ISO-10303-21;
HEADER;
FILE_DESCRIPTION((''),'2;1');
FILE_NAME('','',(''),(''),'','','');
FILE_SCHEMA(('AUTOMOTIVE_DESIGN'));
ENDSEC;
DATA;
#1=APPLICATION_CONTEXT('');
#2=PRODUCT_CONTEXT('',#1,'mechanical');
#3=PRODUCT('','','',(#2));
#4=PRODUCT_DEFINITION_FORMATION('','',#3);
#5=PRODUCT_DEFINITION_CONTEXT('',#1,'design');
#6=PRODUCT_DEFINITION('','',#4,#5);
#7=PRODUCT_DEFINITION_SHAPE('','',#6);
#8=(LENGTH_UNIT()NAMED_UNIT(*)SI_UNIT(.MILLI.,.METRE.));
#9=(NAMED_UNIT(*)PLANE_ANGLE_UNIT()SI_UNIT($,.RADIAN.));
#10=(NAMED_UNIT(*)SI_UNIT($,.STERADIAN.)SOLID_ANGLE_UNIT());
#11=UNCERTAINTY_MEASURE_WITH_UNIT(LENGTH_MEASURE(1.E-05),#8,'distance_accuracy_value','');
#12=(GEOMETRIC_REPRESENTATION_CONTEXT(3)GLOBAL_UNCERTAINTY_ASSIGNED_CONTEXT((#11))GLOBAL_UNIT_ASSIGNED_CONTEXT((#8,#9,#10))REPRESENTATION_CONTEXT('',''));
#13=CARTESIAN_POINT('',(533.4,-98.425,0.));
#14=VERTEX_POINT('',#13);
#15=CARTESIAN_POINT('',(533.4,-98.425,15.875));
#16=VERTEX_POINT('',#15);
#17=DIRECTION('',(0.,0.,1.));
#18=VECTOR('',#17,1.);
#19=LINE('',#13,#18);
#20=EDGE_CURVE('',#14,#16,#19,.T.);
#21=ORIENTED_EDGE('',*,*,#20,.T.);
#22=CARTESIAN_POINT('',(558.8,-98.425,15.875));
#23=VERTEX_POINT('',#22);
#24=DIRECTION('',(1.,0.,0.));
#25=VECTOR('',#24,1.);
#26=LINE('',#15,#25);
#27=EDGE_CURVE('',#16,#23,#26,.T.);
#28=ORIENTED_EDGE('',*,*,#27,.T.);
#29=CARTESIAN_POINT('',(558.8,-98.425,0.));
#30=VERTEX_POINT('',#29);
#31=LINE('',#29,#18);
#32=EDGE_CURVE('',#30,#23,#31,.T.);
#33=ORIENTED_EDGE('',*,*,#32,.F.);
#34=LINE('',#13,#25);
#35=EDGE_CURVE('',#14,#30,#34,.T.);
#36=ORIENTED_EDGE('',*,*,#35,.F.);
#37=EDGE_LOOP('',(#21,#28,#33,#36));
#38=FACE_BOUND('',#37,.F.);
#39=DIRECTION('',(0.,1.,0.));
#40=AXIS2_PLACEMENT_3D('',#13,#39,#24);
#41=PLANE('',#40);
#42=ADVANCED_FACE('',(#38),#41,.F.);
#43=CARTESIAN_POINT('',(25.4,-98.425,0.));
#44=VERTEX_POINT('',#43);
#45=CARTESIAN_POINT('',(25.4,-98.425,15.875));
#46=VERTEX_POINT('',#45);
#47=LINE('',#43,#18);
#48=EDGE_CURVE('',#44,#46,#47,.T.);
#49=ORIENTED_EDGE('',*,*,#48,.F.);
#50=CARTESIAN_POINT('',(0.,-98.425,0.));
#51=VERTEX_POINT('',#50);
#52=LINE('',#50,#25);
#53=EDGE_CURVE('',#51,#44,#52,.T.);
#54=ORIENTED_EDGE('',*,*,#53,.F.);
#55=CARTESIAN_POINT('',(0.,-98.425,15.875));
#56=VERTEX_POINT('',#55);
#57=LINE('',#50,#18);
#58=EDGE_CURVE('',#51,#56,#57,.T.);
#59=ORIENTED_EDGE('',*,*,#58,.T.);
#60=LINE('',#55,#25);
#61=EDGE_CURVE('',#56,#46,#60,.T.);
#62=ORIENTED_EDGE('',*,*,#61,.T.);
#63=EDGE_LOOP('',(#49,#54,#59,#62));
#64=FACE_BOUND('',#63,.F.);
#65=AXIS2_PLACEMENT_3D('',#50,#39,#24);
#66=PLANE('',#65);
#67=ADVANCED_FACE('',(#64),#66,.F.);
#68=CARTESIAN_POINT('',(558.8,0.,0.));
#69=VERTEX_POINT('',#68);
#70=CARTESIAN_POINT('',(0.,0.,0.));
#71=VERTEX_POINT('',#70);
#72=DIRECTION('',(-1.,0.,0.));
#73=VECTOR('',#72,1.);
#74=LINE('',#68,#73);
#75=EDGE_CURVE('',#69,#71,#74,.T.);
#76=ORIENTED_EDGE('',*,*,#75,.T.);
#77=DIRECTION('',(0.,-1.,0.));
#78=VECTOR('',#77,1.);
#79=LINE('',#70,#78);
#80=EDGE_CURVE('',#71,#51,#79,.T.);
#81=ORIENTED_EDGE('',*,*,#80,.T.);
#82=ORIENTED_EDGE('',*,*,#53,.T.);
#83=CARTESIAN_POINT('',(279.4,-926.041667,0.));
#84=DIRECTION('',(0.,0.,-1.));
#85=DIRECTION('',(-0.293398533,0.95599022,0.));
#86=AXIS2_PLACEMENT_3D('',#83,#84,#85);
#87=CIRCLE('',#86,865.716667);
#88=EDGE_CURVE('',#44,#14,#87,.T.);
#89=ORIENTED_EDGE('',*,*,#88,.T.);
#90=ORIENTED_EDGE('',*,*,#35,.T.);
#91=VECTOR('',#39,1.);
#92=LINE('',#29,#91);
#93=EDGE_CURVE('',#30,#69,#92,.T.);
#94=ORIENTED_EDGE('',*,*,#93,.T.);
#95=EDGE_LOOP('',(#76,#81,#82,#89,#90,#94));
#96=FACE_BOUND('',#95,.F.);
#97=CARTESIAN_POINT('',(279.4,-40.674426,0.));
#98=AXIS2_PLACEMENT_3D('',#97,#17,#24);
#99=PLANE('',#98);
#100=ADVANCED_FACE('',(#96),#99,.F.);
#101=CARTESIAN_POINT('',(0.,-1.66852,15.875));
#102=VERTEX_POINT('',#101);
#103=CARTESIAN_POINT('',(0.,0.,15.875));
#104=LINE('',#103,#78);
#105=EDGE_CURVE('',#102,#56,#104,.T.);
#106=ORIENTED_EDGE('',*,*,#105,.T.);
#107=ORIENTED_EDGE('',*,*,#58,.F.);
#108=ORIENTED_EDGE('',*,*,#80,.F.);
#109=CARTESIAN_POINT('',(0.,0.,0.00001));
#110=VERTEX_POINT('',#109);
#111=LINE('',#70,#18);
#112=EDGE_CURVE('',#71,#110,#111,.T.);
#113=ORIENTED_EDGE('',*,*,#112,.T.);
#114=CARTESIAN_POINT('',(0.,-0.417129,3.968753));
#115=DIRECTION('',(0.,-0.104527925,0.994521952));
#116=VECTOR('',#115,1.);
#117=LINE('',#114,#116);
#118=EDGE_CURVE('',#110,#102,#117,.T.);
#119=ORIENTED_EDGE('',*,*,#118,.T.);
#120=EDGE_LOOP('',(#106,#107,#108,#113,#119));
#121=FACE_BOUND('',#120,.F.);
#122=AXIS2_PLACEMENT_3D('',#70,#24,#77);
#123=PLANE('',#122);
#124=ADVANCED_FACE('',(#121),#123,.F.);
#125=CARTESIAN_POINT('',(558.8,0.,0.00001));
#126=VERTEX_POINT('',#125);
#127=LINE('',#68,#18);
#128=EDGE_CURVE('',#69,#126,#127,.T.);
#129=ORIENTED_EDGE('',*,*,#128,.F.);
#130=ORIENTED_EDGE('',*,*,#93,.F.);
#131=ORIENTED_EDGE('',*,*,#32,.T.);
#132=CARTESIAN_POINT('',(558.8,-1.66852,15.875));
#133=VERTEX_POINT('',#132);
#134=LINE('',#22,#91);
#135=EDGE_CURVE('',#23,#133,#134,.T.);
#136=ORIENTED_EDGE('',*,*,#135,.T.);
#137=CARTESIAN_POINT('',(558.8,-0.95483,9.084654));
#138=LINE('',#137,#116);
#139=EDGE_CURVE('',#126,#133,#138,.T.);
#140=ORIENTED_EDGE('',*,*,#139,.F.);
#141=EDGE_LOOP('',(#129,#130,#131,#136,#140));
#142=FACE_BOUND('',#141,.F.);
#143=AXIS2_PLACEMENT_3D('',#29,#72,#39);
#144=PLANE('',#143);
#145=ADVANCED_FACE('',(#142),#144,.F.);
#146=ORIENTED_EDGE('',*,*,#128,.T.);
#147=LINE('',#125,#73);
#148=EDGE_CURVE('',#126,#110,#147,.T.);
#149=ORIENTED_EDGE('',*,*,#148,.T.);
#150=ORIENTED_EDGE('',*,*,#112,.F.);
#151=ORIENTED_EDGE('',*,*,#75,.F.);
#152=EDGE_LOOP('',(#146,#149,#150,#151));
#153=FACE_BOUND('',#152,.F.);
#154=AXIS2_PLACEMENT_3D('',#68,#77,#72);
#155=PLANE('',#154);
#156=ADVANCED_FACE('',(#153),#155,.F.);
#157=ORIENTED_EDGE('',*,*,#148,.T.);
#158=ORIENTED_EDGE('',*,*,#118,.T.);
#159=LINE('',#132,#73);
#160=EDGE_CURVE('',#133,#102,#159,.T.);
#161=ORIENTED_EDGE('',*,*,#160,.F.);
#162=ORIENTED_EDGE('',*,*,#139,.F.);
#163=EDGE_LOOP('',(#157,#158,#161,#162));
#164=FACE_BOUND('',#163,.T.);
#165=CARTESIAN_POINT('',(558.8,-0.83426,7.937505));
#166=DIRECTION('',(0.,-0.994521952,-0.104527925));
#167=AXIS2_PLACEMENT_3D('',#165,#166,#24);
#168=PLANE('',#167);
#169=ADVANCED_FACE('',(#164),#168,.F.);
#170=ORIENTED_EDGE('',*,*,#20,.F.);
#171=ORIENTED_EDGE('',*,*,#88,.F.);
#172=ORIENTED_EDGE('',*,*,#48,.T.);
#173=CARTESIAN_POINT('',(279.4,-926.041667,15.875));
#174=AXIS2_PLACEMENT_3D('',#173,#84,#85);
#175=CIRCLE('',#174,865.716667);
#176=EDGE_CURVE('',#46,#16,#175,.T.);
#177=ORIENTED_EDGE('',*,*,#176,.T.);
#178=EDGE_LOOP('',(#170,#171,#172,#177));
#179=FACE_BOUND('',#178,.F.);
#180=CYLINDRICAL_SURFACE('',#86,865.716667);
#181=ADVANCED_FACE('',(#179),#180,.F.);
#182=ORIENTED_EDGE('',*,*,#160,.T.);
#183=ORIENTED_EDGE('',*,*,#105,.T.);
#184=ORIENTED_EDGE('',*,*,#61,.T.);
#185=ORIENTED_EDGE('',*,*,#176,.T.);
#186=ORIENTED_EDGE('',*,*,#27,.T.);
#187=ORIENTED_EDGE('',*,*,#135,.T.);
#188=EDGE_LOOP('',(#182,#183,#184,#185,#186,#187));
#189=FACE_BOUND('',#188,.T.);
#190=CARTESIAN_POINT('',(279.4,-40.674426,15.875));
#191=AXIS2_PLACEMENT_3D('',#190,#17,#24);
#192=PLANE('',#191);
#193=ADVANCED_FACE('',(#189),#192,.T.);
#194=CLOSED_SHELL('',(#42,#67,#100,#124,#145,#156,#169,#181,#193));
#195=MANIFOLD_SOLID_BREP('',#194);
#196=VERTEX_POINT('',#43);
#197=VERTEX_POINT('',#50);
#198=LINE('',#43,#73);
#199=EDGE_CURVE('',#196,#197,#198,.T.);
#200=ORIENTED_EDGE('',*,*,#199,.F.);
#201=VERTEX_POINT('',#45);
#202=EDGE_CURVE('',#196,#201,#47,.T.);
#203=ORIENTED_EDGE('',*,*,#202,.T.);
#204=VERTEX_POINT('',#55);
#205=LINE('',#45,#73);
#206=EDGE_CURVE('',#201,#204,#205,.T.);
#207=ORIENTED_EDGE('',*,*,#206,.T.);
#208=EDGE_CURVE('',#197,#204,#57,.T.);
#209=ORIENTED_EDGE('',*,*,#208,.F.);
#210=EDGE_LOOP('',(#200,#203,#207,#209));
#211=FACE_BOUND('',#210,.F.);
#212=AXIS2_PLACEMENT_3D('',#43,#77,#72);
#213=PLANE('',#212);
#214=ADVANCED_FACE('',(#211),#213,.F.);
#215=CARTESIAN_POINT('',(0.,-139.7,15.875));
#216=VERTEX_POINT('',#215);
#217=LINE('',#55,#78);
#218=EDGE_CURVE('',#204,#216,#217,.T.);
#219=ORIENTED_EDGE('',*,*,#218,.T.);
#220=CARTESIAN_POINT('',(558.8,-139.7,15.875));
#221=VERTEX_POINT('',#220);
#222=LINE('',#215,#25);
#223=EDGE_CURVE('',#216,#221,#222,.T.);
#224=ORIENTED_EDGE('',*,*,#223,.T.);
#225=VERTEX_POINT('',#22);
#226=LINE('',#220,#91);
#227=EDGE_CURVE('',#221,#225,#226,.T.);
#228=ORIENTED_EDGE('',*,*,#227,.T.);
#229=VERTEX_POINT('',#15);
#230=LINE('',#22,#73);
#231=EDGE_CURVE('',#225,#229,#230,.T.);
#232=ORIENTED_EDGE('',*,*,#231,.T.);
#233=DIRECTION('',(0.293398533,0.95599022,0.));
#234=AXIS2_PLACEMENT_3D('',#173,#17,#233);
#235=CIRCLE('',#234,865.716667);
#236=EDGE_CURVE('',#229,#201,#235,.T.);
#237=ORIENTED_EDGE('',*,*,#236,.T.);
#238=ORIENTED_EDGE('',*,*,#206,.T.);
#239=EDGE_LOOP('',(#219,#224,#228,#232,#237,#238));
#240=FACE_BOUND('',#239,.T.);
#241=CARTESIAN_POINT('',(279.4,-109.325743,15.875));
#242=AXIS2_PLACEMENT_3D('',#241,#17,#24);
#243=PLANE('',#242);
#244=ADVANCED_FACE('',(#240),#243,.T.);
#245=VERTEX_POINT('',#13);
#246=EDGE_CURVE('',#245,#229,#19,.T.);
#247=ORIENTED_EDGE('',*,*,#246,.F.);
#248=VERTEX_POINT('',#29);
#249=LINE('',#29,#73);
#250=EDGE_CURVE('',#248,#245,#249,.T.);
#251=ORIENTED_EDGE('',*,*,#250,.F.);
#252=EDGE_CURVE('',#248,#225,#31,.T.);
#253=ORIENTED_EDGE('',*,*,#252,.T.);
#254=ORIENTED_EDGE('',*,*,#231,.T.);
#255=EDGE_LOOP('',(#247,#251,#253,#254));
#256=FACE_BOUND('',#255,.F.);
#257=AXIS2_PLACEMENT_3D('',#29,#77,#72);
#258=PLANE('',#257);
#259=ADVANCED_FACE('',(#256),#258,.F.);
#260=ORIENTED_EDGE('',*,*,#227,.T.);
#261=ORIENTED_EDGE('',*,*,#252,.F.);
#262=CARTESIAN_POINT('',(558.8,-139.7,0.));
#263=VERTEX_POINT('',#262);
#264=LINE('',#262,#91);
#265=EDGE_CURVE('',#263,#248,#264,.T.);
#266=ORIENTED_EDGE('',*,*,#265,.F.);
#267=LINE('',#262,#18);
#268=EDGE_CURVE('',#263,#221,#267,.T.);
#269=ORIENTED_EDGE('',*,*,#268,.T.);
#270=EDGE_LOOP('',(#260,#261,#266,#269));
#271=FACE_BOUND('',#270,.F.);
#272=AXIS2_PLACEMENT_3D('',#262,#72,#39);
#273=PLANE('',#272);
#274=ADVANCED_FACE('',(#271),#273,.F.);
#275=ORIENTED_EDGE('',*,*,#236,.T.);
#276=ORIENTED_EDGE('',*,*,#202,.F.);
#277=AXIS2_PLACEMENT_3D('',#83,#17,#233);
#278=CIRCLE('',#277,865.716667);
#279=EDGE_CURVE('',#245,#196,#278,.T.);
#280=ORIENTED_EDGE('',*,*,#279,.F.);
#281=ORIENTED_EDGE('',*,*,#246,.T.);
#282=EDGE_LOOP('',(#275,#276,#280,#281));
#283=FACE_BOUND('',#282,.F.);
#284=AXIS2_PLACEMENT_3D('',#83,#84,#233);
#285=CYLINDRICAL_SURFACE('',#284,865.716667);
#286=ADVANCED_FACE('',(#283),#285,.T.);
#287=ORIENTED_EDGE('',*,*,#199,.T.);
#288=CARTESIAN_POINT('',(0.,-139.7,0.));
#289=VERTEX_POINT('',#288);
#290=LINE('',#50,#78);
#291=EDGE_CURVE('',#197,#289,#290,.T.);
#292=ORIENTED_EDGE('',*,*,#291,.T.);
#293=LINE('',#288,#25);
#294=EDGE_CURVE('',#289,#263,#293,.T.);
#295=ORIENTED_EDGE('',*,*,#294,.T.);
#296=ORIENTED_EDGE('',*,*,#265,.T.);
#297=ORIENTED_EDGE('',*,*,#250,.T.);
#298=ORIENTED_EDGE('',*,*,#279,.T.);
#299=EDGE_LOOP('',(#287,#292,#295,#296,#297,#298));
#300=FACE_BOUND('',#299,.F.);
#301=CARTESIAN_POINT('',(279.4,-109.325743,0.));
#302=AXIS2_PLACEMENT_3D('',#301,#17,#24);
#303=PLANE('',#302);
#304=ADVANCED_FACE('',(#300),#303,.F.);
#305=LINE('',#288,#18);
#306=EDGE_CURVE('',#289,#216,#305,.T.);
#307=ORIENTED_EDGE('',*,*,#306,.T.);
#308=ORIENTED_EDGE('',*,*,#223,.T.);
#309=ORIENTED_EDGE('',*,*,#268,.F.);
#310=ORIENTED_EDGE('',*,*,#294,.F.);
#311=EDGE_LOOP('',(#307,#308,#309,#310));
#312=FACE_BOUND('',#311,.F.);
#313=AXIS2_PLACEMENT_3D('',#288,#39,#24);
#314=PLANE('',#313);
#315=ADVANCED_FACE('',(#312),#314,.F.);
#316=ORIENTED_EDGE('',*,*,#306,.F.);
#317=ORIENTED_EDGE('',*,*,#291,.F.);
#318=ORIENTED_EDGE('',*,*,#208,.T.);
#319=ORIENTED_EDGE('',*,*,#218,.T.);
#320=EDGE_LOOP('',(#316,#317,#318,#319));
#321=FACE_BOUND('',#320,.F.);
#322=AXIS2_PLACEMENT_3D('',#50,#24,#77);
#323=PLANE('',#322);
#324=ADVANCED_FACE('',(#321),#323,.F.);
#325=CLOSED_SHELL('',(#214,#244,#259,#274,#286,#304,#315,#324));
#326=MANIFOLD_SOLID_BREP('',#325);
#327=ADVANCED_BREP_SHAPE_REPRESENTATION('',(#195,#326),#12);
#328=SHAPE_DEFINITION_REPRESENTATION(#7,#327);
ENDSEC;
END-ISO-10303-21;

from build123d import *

# Parameters (mm, degrees)
F1_DEPTH = 15.875
F2_DEPTH = 15.875
F3_SIZE2 = 1.66852
F3_SIZE  = 15.87499


# Not quite as in the source:
# - a fillet or chamfer is up to 0.001 mm smaller than in the source, because OpenCascade refuses the exact size


with BuildPart() as f1:
    # F0 (on Top) → F1 (new body)
    with BuildSketch(Plane.XY):
        with BuildLine():
            Line((558.8, 0), (0, 0))
            Line((0, 0), (0, -98.425))
            Line((0, -98.425), (25.4, -98.425))
            ThreePointArc((25.4, -98.425), (279.4, -60.325), (533.4, -98.425))
            Line((533.4, -98.425), (558.8, -98.425))
            Line((558.8, -98.425), (558.8, 0))
        make_face()
    extrude(amount=F1_DEPTH)

    # F3 (size 15.875 and 1.6685297348 in the source; OpenCascade refuses exactly that, so slightly less here)
    f3_edges = [f1.edges().sort_by_distance(p)[0] for p in [
        (279.4, 0, 15.875),
    ]]
    f3_side = f1.faces().sort_by_distance((279.4, 0, 7.9375))[0]
    chamfer(f3_edges, length=F3_SIZE, length2=F3_SIZE2, reference=f3_side)


with BuildPart() as f2:
    # F0 (on Top) → F2 (new body)
    with BuildSketch(Plane.XY):
        with BuildLine():
            Line((25.4, -98.425), (0, -98.425))
            Line((0, -98.425), (0, -139.7))
            Line((0, -139.7), (558.8, -139.7))
            Line((558.8, -139.7), (558.8, -98.425))
            Line((558.8, -98.425), (533.4, -98.425))
            ThreePointArc((533.4, -98.425), (279.4, -60.325), (25.4, -98.425))
        make_face()
    extrude(amount=F2_DEPTH)


solid = Compound([f1.part, f2.part])
